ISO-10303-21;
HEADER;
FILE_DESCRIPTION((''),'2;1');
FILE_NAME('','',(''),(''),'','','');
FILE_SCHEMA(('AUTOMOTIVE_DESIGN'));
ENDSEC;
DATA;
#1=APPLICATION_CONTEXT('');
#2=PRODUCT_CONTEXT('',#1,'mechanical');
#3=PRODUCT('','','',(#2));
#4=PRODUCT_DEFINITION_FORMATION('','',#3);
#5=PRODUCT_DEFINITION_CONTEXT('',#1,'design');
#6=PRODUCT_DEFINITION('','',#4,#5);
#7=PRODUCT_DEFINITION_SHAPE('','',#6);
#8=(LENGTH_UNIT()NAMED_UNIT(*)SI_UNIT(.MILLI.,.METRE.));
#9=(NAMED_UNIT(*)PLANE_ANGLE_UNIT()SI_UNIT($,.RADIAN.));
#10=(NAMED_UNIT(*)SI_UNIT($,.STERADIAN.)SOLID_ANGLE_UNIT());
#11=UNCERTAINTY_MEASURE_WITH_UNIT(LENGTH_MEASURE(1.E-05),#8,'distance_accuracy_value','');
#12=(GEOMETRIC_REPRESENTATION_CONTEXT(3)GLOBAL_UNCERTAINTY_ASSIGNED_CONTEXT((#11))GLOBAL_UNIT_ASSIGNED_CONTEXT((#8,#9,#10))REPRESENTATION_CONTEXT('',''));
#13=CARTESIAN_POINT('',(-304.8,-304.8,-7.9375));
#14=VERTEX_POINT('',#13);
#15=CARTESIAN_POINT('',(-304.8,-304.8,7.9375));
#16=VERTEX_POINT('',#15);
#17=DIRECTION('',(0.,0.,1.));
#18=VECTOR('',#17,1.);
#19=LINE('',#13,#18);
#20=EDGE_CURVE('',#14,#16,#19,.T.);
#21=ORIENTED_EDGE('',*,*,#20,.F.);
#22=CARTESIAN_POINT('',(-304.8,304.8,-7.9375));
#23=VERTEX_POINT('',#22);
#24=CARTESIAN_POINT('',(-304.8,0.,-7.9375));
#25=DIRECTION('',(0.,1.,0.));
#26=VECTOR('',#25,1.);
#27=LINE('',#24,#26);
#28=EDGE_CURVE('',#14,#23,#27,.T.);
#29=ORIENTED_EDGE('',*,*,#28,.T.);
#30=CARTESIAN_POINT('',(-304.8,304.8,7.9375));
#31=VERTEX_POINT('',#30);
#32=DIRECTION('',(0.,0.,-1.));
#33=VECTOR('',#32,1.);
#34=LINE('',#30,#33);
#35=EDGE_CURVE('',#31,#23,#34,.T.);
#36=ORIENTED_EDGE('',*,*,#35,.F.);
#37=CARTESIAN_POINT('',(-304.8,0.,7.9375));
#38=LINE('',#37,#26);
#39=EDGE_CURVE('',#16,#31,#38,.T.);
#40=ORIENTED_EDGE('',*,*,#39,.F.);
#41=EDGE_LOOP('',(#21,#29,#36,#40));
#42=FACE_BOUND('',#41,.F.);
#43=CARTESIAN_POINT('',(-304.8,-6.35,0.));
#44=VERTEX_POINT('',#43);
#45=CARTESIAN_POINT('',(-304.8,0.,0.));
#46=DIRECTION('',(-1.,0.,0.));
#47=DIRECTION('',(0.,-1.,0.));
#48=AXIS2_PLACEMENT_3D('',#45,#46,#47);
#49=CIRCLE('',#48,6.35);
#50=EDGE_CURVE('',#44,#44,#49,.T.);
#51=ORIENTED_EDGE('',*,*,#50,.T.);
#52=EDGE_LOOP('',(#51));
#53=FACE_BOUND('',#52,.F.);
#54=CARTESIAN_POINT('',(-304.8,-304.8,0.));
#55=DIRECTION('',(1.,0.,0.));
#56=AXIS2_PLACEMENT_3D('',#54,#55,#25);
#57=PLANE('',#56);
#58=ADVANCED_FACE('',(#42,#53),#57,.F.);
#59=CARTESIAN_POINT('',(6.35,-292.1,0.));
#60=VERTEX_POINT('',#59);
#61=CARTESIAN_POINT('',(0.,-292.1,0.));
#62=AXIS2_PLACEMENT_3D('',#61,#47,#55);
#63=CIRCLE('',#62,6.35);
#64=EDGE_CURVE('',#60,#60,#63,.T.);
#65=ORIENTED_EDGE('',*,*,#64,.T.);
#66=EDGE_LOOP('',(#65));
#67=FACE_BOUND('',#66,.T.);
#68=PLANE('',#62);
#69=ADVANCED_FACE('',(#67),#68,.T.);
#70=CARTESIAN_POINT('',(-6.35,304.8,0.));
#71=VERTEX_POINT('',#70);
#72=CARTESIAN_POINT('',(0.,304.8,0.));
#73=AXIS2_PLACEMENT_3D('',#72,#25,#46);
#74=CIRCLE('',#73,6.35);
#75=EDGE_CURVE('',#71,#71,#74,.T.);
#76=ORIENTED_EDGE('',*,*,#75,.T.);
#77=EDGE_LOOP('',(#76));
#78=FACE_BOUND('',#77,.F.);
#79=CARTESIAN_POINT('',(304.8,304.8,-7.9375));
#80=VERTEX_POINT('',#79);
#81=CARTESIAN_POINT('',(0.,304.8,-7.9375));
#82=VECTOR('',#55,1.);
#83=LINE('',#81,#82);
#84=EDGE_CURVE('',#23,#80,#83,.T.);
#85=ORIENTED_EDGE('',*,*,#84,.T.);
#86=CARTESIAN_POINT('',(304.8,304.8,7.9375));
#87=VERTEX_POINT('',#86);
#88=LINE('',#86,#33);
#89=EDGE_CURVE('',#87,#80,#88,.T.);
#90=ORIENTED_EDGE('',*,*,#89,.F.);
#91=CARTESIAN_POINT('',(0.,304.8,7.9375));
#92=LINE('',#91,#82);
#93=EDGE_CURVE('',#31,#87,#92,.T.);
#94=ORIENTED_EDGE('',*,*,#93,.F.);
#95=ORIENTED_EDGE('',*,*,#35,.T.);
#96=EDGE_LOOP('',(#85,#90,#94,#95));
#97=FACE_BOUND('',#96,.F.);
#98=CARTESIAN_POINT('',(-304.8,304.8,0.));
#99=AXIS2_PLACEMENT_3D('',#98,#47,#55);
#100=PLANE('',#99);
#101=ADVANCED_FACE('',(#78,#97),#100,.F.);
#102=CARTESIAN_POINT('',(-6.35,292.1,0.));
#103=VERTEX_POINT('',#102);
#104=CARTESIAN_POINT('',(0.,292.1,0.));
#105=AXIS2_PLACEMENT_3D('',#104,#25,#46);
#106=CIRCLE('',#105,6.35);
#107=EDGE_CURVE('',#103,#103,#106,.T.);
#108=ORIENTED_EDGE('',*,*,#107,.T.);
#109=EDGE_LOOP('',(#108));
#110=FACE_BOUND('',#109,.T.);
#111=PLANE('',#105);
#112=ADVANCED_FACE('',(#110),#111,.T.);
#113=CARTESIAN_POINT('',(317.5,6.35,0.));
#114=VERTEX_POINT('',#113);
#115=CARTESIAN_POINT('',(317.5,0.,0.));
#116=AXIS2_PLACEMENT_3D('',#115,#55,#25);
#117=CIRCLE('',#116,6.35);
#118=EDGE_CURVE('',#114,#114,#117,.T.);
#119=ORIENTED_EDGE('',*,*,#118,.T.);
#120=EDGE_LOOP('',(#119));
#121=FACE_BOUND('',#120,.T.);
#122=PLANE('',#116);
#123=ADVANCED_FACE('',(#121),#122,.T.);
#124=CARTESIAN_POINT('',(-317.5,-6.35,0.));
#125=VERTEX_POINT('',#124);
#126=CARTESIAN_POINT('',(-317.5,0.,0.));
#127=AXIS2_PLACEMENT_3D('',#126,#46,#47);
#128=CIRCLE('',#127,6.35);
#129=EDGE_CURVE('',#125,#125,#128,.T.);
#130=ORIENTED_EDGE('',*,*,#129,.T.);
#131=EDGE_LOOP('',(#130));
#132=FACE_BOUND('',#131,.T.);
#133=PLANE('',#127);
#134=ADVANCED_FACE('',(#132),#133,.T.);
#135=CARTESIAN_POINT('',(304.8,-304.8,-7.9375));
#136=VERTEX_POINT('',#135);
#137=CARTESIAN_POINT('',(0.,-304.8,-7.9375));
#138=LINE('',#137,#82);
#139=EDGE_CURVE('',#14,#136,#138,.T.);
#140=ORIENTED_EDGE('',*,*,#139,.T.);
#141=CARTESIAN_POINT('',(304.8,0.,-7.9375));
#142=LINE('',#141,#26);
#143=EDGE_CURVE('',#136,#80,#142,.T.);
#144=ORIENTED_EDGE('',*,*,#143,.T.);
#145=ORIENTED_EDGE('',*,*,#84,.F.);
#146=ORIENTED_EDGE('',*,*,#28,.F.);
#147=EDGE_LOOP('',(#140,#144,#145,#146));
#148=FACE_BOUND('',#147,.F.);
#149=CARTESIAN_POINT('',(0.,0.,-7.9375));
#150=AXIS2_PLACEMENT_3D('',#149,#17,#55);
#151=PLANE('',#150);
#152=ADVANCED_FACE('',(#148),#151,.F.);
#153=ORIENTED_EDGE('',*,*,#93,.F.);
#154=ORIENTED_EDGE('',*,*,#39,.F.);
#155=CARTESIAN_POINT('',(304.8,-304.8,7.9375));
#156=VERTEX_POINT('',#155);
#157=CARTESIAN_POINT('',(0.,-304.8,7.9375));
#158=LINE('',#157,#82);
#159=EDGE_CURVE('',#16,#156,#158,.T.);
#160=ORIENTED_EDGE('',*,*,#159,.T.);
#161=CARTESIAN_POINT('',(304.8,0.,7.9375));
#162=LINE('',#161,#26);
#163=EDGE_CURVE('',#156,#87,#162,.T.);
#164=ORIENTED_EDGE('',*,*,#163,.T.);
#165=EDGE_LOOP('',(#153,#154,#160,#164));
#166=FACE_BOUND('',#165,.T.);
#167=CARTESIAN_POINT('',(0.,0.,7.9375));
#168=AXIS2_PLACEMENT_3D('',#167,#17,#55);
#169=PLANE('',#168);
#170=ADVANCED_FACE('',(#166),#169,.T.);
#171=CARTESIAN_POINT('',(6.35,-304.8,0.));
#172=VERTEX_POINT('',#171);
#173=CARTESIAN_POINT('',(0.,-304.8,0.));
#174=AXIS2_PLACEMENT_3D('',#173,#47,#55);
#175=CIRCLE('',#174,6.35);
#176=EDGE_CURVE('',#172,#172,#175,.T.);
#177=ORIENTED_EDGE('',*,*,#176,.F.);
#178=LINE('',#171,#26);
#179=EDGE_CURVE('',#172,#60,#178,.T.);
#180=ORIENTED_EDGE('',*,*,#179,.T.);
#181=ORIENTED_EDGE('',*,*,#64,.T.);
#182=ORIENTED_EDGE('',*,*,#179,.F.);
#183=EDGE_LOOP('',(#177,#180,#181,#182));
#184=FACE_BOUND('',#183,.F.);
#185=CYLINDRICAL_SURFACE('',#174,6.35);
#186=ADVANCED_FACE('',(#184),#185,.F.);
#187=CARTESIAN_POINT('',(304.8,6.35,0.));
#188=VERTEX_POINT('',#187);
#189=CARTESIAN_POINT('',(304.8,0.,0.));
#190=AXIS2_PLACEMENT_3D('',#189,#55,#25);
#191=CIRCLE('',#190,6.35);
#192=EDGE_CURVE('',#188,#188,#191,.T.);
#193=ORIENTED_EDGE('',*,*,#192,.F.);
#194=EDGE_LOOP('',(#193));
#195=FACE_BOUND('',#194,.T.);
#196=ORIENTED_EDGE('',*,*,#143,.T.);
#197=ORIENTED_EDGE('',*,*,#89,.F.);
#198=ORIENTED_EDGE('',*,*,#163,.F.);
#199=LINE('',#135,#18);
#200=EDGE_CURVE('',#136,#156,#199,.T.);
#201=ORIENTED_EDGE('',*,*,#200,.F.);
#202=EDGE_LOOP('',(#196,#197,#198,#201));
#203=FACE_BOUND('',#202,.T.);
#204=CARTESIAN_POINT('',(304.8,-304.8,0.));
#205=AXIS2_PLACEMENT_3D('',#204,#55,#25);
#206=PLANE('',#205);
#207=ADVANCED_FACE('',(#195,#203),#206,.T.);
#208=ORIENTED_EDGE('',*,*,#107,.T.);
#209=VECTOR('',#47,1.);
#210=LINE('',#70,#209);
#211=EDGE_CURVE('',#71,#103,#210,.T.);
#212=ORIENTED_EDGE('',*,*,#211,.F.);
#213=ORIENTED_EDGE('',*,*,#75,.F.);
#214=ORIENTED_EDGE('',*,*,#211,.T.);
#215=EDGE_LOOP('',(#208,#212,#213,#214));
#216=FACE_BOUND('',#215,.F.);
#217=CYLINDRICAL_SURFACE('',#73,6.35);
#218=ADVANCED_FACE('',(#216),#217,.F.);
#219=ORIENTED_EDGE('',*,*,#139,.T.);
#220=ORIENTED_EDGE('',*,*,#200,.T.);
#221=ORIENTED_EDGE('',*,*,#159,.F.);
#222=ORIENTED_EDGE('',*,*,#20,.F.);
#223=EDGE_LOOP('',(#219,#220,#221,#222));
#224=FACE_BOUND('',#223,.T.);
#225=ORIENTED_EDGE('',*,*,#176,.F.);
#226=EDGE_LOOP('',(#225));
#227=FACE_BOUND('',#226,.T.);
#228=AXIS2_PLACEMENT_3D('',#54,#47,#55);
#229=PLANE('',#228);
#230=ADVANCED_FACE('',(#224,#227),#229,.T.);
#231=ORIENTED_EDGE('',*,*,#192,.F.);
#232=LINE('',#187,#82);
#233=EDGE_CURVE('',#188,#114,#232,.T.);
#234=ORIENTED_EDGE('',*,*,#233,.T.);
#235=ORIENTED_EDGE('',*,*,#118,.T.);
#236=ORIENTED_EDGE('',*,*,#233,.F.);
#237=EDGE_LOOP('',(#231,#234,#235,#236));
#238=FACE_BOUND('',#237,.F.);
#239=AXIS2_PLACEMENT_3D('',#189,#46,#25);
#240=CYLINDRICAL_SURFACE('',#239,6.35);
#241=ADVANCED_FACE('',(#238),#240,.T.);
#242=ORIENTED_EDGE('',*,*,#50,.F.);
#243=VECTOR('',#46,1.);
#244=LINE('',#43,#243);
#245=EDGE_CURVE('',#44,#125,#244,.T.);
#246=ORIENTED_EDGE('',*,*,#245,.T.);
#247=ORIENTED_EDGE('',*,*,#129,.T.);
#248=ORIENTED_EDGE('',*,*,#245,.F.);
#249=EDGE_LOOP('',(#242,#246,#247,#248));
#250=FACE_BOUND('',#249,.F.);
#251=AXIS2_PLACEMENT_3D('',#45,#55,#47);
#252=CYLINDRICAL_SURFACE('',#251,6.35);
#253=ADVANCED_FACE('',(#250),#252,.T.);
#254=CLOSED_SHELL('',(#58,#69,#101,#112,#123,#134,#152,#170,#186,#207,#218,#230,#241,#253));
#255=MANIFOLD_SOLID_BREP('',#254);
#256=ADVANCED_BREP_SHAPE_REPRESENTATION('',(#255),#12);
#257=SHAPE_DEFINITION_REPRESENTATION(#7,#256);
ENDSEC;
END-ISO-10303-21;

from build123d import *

# Parameters (mm, degrees)
F0_W     = 609.6
F0_H     = 609.6
F1_DEPTH = 7.9375
F2_R     = 6.35
F3_DEPTH = 12.7
F4_R     = 6.35
F5_DEPTH = 12.7
F6_R     = 6.35
F7_DEPTH = 12.7
F8_R     = 6.35
F9_DEPTH = 12.7


# Not quite as in the source:
# - a length typed as a fraction of an inch, garbled in the dataset ("3 / 203.2 mm" for 3/8 in), is restored


with BuildPart() as f1:
    # F0 (on Top) → F1 (new body, symmetric)
    with BuildSketch(Plane.XY):
        Rectangle(F0_W, F0_H)
    extrude(amount=F1_DEPTH, both=True)

    # F2 (on face) → F3 (join)
    with BuildSketch(Plane.YZ.offset(304.8)):
        Circle(F2_R)
    extrude(amount=F3_DEPTH)

    # F4 (on face) → F5 (cut)
    with BuildSketch(Plane.XZ.offset(304.8)):
        Circle(F4_R)
    extrude(amount=-F5_DEPTH, mode=Mode.SUBTRACT)

    # F6 (on face) → F7 (join)
    with BuildSketch(Plane(origin=(-304.8, 0, 0), x_dir=(0, -1, 0), z_dir=(-1, 0, 0))):
        Circle(F6_R)
    extrude(amount=F7_DEPTH)

    # F8 (on face) → F9 (cut)
    with BuildSketch(Plane(origin=(0, 304.8, 0), x_dir=(-1, 0, 0), z_dir=(0, 1, 0))):
        Circle(F8_R)
    extrude(amount=-F9_DEPTH, mode=Mode.SUBTRACT)


solid = f1.part
